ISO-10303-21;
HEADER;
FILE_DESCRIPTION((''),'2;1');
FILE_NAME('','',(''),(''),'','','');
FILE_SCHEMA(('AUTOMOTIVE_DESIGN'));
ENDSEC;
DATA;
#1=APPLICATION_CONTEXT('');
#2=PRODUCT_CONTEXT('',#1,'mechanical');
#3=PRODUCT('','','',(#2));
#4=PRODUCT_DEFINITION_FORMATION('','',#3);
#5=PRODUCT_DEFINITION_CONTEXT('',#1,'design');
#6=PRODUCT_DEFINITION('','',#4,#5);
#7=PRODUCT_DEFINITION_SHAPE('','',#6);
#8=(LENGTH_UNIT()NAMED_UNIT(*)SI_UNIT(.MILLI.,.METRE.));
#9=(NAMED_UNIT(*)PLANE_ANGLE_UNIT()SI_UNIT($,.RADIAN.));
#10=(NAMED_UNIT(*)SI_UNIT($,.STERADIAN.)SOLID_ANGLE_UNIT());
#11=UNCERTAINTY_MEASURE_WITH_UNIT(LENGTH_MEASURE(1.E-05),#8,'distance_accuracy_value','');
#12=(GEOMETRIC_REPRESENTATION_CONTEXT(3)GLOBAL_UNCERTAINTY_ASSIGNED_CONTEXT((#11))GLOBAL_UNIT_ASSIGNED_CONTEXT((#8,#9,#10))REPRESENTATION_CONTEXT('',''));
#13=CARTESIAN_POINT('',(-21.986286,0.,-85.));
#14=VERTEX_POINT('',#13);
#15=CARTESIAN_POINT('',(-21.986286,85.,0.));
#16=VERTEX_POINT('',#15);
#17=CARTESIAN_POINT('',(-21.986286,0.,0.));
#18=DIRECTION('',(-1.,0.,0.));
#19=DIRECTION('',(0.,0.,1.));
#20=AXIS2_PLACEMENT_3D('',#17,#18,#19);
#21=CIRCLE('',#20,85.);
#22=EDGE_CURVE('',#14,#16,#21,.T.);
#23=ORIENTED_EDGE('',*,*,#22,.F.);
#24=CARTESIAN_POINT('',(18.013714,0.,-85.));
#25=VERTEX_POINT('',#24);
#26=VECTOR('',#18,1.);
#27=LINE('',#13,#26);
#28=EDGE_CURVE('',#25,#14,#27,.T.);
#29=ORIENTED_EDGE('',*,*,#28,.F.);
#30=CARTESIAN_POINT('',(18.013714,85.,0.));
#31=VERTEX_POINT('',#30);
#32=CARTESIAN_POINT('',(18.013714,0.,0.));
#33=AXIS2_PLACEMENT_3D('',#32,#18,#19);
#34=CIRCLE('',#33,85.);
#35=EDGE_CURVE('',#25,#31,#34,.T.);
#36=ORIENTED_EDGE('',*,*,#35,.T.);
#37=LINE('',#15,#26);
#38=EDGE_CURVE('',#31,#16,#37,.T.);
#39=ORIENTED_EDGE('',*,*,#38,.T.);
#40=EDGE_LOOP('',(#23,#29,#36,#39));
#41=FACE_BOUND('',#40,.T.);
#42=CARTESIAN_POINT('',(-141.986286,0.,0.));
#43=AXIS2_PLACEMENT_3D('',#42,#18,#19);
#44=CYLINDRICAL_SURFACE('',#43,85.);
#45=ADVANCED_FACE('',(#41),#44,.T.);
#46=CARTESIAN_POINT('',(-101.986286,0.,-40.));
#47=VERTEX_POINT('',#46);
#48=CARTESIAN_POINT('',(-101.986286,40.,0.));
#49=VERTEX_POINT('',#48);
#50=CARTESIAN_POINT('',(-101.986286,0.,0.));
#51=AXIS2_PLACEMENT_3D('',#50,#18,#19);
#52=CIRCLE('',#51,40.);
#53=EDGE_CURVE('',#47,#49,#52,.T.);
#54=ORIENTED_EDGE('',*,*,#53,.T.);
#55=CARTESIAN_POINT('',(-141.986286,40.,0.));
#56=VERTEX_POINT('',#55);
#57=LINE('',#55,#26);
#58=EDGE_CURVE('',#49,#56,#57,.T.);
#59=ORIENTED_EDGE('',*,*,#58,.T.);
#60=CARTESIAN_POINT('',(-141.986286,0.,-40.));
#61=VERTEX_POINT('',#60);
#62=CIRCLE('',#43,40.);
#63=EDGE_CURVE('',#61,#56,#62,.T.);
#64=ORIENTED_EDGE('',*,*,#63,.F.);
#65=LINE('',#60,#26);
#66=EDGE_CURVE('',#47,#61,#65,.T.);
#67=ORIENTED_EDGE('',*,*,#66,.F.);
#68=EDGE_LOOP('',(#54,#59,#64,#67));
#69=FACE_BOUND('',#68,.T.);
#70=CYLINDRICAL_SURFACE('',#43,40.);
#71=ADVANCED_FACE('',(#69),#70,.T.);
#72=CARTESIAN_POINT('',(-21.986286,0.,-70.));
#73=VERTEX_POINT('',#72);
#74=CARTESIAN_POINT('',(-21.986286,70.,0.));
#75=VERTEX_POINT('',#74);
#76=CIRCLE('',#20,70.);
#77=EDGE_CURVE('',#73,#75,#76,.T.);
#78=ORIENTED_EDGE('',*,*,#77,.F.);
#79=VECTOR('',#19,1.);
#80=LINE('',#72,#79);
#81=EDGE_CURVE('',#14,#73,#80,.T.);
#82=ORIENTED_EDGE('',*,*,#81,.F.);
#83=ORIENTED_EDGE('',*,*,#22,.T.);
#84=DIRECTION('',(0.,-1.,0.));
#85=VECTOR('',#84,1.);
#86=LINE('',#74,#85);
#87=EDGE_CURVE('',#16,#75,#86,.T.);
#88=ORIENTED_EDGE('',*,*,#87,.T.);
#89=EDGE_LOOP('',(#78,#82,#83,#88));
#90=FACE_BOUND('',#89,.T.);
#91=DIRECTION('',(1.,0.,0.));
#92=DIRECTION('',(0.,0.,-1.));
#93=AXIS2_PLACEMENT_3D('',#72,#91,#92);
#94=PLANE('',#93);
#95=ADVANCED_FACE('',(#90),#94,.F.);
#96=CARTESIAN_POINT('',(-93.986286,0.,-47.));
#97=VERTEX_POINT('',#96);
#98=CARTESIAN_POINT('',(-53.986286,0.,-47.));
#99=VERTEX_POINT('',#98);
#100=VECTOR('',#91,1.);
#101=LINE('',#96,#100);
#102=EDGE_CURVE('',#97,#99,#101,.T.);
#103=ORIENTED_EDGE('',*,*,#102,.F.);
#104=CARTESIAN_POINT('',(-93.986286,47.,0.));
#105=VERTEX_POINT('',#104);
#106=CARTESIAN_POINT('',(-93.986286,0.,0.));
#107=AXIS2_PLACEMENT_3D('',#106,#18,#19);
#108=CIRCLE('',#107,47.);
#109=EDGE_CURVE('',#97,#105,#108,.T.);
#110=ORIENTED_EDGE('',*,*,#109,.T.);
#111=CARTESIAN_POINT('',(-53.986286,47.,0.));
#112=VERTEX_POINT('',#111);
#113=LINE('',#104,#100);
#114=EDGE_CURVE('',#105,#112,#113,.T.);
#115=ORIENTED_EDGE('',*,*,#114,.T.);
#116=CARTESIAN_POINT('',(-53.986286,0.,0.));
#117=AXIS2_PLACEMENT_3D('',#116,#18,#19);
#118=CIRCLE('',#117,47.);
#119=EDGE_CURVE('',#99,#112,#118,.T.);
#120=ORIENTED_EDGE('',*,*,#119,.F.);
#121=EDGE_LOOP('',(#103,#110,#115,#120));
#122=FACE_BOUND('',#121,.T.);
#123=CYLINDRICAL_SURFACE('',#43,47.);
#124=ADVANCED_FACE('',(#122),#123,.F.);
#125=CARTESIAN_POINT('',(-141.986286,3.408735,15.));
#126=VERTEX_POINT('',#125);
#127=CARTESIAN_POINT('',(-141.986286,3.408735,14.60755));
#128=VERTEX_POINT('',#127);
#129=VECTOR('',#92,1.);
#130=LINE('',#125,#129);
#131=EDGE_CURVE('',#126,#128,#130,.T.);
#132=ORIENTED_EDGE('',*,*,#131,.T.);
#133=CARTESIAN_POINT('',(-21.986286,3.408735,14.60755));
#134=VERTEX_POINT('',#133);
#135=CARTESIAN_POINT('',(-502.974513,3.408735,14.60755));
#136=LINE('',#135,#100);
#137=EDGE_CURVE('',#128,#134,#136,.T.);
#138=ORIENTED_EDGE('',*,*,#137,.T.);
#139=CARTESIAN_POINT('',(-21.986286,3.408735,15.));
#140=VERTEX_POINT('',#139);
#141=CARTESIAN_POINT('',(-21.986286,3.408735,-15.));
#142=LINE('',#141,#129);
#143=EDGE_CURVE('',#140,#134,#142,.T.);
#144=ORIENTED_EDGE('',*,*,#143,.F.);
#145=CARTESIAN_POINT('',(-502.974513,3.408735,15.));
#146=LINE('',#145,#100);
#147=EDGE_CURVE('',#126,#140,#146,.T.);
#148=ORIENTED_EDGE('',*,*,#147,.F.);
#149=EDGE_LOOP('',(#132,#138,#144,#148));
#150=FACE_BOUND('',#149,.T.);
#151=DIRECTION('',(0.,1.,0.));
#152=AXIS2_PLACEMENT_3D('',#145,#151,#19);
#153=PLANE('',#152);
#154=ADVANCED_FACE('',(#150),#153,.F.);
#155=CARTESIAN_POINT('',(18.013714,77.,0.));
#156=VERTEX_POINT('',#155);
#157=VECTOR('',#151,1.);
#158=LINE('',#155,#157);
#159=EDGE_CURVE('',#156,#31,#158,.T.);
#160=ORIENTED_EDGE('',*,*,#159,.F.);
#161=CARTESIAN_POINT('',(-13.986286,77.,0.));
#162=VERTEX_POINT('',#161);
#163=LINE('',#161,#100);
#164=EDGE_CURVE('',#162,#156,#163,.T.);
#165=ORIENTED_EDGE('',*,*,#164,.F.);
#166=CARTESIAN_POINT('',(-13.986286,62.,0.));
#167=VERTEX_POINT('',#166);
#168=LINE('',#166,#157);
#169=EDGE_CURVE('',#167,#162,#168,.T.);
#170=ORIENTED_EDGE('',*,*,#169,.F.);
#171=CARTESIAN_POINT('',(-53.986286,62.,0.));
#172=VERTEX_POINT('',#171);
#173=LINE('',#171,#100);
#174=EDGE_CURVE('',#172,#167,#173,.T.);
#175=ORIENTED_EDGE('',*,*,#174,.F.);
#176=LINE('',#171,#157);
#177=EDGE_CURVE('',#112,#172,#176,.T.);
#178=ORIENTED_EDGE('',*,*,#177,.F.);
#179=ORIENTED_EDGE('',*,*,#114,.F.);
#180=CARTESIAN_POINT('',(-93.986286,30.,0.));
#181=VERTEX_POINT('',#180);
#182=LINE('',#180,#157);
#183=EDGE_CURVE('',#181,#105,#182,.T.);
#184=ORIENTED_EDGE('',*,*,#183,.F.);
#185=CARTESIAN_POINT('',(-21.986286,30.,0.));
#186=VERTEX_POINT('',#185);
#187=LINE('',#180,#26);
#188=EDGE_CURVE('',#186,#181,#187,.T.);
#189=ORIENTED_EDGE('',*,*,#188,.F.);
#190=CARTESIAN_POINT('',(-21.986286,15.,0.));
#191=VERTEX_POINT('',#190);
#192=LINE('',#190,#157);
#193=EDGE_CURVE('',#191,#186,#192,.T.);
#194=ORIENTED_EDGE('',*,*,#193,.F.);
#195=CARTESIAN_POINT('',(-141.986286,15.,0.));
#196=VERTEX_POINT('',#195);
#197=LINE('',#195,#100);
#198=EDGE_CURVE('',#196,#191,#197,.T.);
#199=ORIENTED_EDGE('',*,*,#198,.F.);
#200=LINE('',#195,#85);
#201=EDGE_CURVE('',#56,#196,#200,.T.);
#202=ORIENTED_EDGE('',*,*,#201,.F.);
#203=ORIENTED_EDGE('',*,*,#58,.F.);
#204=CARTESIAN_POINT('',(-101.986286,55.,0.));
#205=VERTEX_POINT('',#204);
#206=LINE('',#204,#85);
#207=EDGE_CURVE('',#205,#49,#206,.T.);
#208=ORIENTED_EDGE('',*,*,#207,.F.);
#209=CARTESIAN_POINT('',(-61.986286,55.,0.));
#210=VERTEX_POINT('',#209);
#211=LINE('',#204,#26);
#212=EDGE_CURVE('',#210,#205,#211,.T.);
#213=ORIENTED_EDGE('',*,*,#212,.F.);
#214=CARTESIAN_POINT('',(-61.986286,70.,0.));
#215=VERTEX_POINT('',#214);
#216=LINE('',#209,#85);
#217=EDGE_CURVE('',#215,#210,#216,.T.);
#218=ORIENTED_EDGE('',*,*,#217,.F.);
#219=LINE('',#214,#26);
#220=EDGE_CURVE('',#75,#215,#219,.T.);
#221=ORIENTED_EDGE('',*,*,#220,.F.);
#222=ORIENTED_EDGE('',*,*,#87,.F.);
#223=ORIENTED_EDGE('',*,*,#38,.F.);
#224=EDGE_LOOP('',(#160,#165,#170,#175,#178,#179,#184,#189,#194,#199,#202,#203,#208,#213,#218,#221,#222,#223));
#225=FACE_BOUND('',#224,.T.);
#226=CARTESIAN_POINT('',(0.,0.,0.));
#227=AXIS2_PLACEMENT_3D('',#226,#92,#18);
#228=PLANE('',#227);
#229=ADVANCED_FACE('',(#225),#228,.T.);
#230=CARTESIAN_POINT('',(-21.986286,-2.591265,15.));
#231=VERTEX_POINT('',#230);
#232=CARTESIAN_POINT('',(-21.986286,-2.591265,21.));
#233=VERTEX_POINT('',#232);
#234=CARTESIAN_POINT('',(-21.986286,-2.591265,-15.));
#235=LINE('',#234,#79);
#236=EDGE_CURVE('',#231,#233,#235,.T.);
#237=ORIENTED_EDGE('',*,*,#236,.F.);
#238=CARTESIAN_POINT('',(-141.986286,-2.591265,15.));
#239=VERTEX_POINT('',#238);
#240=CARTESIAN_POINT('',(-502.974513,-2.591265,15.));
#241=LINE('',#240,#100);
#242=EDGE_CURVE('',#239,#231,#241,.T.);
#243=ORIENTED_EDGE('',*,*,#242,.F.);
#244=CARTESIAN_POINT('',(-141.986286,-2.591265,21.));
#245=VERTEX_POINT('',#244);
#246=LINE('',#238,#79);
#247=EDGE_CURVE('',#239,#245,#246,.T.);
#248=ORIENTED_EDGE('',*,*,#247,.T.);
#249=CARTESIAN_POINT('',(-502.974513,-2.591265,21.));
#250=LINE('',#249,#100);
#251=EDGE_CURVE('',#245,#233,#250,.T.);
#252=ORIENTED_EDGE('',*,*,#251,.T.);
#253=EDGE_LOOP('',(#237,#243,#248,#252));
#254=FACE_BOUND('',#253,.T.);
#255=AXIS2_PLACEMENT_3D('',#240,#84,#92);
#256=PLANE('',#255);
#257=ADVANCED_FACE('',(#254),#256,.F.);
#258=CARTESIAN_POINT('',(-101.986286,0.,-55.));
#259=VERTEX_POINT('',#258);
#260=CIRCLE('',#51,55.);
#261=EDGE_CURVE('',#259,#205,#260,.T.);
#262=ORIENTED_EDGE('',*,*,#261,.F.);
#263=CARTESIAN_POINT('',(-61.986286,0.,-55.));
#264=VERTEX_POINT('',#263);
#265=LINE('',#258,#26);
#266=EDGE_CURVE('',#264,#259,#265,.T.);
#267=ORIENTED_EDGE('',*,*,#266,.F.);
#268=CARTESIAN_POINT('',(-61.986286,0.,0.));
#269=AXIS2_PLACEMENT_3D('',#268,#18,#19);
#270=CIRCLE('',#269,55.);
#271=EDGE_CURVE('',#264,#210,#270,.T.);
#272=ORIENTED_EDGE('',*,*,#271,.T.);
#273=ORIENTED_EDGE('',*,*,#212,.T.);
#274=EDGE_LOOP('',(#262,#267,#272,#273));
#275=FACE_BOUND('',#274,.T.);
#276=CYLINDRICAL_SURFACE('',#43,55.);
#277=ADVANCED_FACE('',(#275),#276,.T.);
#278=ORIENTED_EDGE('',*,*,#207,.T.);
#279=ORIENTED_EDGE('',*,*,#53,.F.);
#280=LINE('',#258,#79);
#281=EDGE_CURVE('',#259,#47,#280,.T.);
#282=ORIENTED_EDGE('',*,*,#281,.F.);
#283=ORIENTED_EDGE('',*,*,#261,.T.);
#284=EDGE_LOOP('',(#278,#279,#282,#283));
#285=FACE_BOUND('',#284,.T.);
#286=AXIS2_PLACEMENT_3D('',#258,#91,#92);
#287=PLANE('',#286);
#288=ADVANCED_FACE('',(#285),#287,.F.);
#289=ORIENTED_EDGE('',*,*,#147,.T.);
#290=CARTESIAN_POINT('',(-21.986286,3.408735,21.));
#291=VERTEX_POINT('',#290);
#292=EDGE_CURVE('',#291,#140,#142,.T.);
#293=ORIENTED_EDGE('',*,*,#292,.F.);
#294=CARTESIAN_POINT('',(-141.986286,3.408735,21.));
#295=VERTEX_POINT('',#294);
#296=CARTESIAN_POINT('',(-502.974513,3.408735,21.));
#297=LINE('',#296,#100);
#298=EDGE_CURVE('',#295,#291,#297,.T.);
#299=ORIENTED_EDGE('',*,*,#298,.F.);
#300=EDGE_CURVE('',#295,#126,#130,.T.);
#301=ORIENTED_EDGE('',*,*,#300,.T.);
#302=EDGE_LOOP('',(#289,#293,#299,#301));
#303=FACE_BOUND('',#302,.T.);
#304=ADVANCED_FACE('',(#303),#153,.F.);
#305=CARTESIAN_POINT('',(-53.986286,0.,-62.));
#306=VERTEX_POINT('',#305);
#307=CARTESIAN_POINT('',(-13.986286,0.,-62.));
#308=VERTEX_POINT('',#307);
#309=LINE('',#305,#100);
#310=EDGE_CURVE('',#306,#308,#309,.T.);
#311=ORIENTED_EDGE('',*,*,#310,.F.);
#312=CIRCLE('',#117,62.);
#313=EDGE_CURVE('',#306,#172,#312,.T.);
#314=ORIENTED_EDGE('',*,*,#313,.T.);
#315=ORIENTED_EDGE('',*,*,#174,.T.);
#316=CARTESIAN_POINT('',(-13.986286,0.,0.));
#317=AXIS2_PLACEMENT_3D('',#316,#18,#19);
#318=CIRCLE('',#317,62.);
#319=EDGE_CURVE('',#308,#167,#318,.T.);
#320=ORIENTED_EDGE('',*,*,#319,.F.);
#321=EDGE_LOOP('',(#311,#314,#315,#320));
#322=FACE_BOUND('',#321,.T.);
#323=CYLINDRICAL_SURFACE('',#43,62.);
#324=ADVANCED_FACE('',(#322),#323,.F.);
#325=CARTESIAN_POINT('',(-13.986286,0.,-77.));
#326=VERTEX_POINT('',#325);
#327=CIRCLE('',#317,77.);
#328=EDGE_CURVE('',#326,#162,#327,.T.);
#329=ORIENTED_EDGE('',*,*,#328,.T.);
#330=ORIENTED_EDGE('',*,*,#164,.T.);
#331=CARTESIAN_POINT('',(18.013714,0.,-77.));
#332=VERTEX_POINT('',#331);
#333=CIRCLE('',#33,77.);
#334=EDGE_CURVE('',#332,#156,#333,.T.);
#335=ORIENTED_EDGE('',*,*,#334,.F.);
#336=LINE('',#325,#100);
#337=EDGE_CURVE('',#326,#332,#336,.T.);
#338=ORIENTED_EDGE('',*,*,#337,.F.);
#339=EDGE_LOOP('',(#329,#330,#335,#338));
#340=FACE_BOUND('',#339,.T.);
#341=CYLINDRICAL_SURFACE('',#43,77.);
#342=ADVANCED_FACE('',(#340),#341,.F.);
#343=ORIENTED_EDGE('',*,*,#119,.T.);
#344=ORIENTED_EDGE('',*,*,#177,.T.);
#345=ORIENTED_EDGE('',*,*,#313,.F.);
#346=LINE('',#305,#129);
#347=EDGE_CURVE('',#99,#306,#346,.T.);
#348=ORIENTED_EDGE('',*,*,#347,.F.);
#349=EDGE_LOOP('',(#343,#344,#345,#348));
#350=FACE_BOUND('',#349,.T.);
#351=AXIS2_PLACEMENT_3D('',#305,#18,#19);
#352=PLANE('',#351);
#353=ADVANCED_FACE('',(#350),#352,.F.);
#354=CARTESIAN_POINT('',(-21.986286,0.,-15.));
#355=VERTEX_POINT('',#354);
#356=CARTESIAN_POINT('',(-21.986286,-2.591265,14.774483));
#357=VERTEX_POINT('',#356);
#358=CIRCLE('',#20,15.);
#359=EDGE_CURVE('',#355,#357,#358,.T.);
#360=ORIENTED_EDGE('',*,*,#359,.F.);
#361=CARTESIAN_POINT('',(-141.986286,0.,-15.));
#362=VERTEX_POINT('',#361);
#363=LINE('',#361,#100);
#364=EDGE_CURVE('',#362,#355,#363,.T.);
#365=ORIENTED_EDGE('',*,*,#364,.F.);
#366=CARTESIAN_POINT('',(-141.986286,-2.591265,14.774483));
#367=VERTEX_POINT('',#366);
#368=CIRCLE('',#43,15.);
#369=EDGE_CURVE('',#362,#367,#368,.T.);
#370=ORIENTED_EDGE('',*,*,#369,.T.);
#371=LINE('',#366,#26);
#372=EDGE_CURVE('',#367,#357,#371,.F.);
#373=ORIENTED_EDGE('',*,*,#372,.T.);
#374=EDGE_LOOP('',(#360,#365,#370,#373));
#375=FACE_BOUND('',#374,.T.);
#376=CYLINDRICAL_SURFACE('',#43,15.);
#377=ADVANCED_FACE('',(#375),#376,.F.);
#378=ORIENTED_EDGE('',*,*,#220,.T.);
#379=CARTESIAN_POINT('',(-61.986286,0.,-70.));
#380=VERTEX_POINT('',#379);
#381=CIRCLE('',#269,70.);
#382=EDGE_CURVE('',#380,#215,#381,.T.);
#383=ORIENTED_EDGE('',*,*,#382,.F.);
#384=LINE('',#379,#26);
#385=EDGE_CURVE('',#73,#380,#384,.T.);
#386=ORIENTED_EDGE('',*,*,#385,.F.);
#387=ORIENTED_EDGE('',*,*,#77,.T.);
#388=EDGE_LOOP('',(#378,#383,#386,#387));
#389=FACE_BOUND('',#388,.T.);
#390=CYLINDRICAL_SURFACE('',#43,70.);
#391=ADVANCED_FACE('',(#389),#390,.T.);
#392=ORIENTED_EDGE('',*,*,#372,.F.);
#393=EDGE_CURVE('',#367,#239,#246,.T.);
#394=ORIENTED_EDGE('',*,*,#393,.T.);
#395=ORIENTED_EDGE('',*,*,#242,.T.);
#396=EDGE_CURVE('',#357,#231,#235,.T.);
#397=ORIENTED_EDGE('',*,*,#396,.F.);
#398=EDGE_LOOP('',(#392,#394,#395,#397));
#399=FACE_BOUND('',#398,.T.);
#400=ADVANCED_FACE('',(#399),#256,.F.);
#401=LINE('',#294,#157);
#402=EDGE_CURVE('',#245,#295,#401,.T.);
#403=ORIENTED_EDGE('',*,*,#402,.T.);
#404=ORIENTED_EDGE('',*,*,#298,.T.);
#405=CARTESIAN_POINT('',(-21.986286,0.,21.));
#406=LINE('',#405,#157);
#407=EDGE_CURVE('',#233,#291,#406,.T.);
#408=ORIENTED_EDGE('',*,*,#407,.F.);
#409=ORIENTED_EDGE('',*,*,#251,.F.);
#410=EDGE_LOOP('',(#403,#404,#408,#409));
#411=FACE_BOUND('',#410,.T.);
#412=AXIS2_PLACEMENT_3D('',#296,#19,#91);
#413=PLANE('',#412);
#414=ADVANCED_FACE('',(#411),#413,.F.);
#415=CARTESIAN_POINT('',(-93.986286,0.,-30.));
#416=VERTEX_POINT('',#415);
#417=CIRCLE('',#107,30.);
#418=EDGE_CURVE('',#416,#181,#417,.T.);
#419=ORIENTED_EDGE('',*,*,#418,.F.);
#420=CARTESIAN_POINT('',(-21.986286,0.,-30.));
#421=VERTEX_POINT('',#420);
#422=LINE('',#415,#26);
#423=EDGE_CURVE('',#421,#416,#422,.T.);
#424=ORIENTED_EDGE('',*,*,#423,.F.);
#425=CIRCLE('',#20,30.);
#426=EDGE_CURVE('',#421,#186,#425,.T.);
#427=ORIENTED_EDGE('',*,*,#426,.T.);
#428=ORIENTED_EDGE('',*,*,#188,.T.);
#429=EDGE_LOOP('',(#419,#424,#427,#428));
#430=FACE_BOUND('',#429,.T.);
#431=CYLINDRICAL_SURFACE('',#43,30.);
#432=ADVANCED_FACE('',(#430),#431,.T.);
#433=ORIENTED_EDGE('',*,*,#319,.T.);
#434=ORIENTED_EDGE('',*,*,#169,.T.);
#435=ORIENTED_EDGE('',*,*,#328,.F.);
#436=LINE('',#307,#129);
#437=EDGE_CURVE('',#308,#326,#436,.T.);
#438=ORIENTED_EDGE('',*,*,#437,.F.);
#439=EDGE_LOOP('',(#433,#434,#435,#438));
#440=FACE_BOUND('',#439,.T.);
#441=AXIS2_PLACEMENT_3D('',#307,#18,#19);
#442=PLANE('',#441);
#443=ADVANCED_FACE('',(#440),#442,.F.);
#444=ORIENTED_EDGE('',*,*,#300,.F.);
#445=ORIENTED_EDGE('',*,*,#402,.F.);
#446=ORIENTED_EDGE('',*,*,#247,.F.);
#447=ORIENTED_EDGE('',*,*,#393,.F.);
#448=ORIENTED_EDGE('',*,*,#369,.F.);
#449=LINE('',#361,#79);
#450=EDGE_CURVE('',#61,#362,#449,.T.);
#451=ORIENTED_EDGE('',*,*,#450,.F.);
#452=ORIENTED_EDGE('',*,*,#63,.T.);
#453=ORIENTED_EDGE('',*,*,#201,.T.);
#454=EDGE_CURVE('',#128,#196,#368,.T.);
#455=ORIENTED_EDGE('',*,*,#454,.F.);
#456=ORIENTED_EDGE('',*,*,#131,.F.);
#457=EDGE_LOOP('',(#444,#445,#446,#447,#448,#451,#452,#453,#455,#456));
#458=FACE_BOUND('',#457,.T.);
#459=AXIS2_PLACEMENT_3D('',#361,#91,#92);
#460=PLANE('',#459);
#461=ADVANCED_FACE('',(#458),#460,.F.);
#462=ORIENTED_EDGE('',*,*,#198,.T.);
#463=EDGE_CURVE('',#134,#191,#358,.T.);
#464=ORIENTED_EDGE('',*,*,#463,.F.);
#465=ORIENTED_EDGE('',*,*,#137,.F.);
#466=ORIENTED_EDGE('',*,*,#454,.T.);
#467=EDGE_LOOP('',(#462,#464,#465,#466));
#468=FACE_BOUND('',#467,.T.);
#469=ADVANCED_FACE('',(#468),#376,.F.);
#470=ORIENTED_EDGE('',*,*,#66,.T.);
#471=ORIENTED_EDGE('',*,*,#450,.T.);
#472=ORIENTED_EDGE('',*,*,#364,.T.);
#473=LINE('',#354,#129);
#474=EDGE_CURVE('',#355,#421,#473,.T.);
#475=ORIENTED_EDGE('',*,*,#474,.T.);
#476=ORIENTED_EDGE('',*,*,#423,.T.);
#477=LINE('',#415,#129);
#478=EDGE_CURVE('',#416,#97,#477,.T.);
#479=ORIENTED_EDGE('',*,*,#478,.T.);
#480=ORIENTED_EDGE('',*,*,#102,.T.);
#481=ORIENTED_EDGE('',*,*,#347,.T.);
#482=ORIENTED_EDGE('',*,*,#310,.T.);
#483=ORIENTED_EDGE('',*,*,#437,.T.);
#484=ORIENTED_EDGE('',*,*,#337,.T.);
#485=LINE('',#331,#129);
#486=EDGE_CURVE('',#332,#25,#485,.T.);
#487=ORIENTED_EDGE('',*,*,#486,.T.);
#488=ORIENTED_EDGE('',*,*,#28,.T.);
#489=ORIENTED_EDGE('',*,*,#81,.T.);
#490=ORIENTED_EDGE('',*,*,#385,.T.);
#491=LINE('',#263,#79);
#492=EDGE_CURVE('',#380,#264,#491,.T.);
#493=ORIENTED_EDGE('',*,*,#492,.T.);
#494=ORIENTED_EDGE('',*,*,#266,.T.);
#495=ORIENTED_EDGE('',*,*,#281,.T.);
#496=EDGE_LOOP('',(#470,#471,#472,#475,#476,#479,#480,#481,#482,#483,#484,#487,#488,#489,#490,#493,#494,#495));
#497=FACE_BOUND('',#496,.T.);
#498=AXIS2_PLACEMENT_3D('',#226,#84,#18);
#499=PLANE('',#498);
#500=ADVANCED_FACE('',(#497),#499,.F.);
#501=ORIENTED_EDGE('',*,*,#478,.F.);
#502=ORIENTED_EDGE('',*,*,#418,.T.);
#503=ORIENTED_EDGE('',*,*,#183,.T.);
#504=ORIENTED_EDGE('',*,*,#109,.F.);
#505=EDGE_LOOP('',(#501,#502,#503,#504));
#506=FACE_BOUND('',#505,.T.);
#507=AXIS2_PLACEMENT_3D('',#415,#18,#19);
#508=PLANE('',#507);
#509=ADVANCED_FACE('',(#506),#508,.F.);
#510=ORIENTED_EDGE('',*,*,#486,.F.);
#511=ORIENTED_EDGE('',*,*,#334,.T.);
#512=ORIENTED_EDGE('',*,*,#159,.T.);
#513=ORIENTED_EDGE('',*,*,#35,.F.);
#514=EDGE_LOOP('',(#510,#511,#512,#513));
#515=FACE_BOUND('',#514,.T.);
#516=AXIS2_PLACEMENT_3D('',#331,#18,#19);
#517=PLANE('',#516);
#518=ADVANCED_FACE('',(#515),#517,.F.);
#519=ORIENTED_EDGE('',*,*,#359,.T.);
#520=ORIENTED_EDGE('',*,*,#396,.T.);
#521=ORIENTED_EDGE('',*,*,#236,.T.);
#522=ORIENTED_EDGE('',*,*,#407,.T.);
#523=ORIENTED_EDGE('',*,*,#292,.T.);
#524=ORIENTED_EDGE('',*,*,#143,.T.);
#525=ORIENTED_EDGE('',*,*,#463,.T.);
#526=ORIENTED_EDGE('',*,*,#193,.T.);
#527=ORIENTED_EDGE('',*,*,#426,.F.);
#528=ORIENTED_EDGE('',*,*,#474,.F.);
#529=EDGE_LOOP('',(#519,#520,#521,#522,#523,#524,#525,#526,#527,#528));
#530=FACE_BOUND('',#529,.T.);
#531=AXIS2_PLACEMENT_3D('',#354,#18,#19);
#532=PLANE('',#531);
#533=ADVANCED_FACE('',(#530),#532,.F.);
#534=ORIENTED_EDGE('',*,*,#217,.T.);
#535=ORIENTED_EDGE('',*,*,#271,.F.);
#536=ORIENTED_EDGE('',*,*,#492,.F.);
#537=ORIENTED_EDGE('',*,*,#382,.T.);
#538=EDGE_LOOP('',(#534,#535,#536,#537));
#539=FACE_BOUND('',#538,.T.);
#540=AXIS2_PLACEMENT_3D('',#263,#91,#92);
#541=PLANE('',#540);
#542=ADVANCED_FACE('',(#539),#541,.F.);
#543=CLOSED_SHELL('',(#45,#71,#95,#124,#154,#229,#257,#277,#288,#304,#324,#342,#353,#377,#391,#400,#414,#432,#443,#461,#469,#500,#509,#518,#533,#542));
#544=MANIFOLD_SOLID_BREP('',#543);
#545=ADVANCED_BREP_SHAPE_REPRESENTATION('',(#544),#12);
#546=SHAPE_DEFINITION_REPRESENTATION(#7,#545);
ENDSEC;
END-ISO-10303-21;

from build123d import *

# Parameters (mm, degrees)
REVOLVE1_ANGLE     = 270
CUT_EXTRUDE3_START = -120
CUT_EXTRUDE3_DEPTH = 120


# Read off the part's stored shape, not the designer's step: Cut-Extrude3
with BuildPart() as part:
    # Sketch1 → Revolve1 (revolve)
    with BuildSketch(Plane.XY):
        Polygon((-141.986286211, 15), (-21.986286211, 15), (-21.986286211, 30), (-93.986286211, 30), (-93.986286211, 47), (-53.986286211, 47), (-53.986286211, 62), (-13.986286211, 62), (-13.986286211, 77), (18.013713789, 77), (18.013713789, 85), (-21.986286211, 85), (-21.986286211, 70), (-61.986286211, 70), (-61.986286211, 55), (-101.986286211, 55), (-101.986286211, 40), (-141.986286211, 40), align=None)
    revolve(axis=Axis((-141.986286211, 0, 0), (1, 0, 0)), revolution_arc=REVOLVE1_ANGLE)

    # Cut-Extrude3 outline → Cut-Extrude3 (cut)
    with BuildSketch(Plane.ZY.offset(141.986286211).offset(CUT_EXTRUDE3_START)):
        with BuildLine():
            Line((14.774482913, -2.591265069), (21, -2.591265069))
            Line((21, -2.591265069), (21, 3.408734931))
            Line((21, 3.408734931), (14.607550314, 3.408734931))
            ThreePointArc((14.607550314, 3.408734931), (14.994197849, 0.41717007), (14.774482913, -2.591265069))
        make_face()
    extrude(amount=CUT_EXTRUDE3_DEPTH, mode=Mode.SUBTRACT)


solid = part.part
